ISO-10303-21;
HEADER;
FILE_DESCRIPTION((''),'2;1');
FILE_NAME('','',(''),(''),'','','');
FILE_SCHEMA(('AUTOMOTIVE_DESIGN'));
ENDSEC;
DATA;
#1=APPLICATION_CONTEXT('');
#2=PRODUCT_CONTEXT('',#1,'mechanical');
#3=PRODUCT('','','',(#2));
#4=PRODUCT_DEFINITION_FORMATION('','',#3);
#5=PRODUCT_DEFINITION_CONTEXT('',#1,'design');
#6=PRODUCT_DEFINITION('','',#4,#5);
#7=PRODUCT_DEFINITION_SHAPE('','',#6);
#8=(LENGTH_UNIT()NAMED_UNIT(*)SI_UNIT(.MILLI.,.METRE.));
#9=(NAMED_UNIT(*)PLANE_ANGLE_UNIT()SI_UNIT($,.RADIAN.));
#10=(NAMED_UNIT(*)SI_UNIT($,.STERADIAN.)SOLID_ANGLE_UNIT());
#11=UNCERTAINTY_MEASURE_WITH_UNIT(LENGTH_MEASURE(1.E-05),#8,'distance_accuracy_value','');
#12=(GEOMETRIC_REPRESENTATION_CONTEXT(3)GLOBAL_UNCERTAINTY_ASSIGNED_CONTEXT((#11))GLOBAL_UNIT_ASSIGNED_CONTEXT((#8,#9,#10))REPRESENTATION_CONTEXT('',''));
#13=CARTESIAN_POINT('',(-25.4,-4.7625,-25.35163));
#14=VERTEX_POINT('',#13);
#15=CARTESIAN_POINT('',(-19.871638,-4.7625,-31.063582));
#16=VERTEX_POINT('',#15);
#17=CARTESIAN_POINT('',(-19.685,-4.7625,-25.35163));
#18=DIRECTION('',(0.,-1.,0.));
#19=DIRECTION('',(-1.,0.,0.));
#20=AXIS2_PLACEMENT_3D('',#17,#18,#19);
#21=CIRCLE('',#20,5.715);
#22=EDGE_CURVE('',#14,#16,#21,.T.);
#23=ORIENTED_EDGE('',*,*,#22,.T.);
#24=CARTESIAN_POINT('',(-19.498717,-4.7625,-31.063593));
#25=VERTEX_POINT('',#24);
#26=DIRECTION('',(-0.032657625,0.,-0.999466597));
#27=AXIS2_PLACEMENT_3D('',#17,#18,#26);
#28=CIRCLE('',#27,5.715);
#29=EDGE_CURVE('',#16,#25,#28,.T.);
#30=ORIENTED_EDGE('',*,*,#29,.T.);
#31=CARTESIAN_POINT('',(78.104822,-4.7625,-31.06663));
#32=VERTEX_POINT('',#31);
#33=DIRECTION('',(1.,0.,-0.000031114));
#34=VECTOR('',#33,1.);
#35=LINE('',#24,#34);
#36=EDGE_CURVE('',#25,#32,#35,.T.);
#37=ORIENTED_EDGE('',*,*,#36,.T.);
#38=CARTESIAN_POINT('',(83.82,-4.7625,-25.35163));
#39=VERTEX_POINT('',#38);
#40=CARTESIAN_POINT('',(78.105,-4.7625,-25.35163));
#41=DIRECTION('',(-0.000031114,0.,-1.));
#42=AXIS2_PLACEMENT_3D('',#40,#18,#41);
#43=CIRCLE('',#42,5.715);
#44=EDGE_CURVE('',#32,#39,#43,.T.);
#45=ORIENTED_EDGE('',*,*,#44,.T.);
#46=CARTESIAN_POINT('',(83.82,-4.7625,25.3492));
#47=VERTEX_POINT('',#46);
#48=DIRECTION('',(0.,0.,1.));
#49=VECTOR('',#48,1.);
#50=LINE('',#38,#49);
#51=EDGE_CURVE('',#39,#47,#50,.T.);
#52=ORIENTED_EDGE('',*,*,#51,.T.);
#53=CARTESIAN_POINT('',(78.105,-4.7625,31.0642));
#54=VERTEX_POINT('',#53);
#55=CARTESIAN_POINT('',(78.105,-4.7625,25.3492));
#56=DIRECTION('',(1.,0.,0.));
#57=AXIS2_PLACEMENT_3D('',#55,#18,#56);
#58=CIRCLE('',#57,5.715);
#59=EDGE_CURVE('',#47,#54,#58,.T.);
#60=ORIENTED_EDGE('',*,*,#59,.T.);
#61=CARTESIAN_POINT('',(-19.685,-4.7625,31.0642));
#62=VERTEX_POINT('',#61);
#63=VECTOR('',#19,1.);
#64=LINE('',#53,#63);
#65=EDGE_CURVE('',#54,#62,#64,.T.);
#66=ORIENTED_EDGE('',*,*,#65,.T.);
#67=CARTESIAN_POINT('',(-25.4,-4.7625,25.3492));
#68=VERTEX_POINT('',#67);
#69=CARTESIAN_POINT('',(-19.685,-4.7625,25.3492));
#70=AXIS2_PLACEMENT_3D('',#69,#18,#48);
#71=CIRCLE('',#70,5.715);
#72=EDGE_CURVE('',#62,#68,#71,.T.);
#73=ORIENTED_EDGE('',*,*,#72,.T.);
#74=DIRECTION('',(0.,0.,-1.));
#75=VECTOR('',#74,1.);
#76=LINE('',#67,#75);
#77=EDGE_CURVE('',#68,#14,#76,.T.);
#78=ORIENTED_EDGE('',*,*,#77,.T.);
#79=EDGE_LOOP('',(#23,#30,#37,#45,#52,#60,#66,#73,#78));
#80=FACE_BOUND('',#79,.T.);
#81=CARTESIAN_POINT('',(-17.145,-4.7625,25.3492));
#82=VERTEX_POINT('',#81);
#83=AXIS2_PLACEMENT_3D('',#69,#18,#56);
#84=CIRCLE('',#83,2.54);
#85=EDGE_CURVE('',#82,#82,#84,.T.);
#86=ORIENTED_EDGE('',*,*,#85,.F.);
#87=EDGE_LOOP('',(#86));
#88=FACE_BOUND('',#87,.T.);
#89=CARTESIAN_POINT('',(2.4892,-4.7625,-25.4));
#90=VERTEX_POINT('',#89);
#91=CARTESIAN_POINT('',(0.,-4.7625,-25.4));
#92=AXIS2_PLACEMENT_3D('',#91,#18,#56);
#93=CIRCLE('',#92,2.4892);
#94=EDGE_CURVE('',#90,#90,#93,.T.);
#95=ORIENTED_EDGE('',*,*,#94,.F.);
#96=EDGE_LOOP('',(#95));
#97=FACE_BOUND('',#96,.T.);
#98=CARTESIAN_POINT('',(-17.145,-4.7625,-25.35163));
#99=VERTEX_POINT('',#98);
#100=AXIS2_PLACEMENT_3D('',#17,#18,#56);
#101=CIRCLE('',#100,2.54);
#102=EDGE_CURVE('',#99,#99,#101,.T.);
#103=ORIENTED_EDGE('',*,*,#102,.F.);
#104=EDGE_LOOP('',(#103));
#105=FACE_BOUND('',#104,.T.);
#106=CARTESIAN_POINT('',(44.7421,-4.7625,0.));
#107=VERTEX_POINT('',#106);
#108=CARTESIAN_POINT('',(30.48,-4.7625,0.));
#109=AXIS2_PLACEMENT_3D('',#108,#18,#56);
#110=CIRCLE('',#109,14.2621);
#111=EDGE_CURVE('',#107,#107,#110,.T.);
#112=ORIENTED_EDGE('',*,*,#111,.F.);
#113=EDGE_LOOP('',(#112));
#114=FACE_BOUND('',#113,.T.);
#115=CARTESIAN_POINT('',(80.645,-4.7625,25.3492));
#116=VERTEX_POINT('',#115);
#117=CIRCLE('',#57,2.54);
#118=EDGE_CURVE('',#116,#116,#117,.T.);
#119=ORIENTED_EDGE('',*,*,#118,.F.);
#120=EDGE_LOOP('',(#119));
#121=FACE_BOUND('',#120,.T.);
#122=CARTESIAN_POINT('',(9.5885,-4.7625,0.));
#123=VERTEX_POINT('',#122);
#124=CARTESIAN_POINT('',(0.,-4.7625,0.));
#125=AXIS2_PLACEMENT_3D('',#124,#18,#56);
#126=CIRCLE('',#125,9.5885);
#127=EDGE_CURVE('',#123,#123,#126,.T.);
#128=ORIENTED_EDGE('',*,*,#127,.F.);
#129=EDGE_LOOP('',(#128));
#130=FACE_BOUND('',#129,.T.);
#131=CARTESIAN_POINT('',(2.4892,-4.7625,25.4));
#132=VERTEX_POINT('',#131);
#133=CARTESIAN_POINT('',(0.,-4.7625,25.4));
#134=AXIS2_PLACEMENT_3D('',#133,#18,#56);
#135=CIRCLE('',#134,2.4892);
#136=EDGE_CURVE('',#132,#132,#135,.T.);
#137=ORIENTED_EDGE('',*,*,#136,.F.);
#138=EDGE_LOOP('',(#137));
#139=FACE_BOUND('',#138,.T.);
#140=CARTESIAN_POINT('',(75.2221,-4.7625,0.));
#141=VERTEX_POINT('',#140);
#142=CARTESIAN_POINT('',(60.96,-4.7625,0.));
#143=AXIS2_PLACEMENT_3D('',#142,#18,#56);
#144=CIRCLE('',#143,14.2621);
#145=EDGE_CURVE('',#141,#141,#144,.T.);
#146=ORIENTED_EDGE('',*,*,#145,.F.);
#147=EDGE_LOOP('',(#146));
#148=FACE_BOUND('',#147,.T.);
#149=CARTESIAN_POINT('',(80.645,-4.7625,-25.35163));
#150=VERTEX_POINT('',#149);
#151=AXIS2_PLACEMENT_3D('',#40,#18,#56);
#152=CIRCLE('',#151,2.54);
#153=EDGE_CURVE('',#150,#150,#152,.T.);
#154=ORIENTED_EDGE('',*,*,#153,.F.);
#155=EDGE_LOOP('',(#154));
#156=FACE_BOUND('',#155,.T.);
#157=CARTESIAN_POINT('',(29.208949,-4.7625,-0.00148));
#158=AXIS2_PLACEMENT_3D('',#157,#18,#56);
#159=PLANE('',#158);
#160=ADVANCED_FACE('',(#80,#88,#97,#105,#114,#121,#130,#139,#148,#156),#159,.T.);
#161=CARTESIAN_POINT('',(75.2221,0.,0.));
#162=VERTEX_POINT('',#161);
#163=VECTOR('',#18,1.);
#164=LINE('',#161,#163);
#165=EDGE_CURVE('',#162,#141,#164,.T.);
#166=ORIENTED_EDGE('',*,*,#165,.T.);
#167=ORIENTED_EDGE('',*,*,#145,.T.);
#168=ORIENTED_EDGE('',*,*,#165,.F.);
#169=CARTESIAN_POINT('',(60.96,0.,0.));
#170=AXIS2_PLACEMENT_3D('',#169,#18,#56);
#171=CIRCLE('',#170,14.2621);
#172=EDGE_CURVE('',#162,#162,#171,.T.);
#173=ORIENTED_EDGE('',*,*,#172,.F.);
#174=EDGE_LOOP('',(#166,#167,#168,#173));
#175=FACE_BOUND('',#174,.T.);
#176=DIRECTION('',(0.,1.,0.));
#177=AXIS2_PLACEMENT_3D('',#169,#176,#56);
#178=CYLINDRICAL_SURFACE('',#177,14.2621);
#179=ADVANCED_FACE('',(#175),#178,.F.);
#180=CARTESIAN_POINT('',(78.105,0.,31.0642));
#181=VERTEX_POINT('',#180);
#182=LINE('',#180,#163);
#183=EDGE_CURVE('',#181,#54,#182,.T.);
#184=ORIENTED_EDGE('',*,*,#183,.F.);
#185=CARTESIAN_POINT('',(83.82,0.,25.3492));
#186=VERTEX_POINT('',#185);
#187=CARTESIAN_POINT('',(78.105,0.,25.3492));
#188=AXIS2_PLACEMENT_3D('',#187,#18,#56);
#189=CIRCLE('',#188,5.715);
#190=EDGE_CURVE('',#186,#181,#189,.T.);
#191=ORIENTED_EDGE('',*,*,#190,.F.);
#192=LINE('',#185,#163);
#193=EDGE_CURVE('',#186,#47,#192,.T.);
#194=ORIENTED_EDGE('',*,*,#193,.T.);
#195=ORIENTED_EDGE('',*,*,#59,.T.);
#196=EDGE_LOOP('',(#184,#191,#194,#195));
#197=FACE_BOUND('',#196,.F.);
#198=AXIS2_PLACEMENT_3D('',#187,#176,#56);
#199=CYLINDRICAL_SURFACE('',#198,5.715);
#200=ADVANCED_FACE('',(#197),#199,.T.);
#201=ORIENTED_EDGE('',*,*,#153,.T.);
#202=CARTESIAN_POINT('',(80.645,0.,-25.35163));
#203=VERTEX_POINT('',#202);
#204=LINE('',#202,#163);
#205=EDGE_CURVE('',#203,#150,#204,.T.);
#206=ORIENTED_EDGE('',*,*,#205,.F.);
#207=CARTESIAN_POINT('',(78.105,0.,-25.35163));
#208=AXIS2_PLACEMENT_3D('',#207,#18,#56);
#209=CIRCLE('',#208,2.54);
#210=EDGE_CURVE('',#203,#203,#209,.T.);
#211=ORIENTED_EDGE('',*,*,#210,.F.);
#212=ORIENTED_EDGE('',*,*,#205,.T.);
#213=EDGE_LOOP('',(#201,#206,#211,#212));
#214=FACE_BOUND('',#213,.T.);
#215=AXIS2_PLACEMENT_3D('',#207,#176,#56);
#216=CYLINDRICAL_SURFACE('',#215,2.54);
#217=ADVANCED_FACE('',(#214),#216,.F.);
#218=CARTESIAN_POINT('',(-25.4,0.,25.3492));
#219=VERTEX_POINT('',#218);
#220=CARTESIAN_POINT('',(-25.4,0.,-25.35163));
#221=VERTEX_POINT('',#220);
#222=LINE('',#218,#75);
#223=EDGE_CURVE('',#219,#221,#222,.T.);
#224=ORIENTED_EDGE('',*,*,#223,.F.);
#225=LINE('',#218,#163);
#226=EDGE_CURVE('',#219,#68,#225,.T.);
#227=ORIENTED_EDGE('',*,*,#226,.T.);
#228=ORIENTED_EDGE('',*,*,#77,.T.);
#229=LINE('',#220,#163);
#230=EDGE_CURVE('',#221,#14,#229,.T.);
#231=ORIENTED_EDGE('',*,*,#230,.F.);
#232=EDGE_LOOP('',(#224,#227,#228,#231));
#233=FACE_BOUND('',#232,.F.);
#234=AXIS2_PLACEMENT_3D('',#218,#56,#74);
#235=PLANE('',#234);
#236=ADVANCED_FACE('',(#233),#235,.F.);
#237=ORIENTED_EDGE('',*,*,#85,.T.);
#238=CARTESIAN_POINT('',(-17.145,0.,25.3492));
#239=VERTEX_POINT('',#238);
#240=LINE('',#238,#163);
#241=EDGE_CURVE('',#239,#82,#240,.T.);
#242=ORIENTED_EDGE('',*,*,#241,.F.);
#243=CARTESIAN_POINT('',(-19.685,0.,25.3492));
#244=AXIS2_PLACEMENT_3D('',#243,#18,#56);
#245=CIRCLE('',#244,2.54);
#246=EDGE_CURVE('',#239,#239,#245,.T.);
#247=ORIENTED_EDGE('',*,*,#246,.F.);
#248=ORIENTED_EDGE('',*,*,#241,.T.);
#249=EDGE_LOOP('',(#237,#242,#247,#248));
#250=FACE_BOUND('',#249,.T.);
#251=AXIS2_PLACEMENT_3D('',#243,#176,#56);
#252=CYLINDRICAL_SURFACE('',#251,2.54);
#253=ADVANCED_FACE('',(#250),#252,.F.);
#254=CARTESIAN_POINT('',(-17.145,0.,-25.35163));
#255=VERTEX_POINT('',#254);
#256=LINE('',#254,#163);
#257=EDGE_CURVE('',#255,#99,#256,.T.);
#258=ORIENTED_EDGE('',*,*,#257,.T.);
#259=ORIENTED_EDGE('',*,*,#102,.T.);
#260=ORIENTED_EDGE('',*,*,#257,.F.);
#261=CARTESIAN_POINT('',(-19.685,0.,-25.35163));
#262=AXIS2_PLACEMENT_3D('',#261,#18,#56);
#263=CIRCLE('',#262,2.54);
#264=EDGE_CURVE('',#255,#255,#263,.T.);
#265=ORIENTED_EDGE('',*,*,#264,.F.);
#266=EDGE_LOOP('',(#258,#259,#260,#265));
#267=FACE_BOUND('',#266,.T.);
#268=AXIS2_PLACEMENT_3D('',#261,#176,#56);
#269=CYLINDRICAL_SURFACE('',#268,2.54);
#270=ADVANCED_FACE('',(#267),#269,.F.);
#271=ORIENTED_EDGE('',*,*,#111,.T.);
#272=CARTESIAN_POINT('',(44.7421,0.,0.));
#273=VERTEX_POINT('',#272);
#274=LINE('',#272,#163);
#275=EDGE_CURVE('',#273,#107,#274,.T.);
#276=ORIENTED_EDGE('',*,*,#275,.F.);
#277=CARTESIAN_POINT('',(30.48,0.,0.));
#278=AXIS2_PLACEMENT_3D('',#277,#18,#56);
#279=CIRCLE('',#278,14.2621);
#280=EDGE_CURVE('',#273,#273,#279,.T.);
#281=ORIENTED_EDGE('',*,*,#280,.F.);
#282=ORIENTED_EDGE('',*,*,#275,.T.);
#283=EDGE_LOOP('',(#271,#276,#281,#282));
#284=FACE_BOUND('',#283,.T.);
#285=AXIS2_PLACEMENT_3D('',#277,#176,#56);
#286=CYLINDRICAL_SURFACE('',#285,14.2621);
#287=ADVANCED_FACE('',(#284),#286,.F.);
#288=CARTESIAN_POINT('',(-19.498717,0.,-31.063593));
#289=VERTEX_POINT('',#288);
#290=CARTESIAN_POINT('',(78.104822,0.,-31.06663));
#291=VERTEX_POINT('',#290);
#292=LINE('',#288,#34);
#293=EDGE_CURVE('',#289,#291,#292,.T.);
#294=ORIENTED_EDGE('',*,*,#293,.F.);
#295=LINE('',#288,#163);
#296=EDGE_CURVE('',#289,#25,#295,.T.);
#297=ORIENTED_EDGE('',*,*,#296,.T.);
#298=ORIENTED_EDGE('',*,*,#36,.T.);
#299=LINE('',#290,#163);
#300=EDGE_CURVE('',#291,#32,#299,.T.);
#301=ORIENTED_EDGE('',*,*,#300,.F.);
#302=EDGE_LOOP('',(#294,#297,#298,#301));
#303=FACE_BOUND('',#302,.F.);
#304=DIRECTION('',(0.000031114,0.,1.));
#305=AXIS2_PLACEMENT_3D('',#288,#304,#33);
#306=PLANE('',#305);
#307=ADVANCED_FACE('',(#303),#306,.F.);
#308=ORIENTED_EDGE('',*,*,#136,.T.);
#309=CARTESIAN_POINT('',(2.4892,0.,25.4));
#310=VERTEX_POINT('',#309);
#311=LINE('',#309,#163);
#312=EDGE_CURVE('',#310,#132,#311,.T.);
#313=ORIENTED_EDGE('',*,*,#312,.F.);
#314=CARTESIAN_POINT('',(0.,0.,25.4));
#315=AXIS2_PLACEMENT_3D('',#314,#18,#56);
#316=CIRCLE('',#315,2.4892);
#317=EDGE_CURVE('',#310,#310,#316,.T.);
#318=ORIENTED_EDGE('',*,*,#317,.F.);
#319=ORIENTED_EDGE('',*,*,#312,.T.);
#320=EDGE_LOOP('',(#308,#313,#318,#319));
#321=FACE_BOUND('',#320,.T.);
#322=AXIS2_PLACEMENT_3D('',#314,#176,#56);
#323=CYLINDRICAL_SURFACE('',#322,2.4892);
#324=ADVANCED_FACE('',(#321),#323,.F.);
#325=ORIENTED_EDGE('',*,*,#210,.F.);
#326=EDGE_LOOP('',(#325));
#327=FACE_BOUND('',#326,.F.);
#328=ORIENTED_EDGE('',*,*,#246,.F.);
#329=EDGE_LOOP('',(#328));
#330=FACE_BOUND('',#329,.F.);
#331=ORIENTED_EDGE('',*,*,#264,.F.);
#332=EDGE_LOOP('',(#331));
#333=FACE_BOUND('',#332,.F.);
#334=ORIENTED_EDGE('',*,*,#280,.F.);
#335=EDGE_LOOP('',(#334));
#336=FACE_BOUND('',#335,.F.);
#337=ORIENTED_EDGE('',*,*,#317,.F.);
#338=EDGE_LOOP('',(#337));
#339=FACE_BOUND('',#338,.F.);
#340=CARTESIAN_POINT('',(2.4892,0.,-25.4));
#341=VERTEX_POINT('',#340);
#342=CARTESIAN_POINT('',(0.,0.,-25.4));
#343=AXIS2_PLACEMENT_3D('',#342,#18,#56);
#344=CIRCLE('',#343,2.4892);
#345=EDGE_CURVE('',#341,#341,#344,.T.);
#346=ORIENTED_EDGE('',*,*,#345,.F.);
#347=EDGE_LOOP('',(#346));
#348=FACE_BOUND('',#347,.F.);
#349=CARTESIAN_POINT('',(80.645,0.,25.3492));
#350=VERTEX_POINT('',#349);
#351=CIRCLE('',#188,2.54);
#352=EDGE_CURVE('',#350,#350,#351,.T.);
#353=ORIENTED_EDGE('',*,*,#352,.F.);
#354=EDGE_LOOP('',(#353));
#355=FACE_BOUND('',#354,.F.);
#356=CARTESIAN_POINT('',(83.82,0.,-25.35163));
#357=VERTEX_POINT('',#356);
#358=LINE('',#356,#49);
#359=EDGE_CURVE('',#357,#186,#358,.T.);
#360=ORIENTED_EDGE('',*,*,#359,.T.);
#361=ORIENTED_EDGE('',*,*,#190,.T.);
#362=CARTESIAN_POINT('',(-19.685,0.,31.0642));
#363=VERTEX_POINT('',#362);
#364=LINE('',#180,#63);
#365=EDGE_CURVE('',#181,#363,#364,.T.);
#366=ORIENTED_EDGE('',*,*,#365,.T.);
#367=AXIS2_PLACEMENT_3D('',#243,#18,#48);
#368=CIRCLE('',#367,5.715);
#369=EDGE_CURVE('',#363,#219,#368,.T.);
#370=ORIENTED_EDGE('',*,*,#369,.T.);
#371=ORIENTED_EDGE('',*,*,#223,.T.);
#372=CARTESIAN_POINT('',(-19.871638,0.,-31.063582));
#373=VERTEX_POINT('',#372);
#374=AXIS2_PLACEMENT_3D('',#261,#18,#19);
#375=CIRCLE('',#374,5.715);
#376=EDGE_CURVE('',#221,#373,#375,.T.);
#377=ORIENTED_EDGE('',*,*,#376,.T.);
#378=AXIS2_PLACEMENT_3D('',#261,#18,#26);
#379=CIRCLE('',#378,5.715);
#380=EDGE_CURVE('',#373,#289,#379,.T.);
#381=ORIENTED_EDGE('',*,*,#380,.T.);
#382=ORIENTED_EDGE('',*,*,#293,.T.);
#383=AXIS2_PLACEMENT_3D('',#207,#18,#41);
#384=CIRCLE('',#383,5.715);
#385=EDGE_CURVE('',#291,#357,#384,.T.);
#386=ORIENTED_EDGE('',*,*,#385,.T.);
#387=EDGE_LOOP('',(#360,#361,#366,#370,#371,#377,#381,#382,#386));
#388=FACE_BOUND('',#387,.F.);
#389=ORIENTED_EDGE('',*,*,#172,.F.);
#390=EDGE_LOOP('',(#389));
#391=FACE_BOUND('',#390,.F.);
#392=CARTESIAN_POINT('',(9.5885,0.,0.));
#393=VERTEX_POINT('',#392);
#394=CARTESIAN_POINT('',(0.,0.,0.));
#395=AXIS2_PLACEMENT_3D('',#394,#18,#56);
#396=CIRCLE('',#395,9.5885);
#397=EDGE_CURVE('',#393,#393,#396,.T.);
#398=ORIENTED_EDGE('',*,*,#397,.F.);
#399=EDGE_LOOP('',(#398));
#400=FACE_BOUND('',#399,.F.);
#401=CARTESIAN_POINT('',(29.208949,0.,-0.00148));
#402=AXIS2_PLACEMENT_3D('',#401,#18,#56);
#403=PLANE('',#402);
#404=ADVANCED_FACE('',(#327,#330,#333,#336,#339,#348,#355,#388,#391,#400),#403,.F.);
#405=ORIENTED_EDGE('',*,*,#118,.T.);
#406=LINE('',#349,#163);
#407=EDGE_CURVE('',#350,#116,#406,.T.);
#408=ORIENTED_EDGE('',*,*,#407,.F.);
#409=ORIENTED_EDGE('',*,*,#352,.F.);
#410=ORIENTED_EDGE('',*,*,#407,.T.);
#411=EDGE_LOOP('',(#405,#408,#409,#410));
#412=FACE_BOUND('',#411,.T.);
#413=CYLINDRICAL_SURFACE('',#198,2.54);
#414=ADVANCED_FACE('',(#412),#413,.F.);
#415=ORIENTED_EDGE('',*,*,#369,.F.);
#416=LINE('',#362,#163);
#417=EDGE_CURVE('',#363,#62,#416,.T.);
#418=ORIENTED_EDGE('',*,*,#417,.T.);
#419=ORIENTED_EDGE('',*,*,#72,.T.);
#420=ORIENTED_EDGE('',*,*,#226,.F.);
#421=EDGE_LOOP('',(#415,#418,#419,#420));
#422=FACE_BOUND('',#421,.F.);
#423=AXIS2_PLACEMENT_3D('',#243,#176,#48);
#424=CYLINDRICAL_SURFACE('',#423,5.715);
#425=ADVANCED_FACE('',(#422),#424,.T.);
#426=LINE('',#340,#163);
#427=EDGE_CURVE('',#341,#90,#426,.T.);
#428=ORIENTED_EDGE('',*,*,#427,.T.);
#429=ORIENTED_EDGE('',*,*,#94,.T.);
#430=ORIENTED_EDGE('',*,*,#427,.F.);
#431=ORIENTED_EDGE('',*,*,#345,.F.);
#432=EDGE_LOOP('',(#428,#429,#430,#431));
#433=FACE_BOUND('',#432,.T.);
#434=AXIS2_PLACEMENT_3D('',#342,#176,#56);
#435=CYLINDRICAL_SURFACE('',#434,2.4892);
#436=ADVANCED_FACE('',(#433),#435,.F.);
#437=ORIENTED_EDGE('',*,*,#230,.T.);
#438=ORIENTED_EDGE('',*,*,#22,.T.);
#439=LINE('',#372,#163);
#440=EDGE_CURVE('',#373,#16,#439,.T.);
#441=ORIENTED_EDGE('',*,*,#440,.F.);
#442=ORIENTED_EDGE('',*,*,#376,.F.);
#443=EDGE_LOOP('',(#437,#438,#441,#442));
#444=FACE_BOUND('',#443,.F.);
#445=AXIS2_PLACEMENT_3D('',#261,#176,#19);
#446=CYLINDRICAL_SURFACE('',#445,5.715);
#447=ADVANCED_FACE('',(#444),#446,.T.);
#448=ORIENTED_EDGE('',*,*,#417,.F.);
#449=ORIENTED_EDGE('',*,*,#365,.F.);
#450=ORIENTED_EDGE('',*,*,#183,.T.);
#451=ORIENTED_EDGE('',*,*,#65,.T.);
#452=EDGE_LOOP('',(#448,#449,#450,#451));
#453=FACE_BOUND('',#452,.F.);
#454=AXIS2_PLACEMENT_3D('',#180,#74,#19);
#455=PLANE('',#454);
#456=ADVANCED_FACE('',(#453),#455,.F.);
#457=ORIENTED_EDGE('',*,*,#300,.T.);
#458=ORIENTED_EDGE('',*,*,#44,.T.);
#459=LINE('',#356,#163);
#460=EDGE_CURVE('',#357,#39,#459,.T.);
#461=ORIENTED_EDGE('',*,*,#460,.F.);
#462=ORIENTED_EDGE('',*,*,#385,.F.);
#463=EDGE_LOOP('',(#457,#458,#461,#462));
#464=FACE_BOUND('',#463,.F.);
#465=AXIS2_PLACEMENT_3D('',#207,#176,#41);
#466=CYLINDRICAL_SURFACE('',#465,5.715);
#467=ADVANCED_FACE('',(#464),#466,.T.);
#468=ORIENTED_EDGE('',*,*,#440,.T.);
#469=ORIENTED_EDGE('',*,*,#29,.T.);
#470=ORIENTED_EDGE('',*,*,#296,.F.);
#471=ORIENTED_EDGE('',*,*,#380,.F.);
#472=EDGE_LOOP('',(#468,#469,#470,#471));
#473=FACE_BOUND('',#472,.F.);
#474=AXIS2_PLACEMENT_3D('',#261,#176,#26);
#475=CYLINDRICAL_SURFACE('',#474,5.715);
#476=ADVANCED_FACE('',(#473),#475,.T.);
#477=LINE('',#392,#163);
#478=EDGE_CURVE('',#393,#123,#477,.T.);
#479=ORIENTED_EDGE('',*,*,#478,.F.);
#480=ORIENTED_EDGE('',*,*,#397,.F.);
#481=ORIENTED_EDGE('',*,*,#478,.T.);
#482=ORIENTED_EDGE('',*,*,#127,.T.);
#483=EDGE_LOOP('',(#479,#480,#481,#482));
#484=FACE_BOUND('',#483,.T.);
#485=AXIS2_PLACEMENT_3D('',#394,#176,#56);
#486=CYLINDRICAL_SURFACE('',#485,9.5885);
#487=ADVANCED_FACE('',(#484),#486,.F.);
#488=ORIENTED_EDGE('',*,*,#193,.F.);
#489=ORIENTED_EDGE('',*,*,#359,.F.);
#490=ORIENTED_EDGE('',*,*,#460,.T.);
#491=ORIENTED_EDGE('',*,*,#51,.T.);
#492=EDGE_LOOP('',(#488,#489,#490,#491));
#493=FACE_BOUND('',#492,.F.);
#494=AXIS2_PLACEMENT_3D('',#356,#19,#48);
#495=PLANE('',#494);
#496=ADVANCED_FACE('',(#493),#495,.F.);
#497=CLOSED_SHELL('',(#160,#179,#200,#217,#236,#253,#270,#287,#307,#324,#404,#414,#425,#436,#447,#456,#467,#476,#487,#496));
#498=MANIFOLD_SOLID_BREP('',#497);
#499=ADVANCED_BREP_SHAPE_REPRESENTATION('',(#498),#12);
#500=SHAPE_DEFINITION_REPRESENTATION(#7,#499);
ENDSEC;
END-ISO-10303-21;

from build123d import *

# Parameters (mm, degrees)
F0_R     = 2.54
F0_R_2   = 2.4892
F0_R_3   = 9.5885
F0_R_4   = 14.2621
F1_DEPTH = 4.7625


# Not quite as in the source:
# - a length typed as a fraction of an inch, garbled in the dataset ("3 / 203.2 mm" for 3/8 in), is restored


with BuildPart() as f1:
    # F0 (on Front) → F1 (new body)
    with BuildSketch(Plane.XZ):
        with BuildLine():
            Line((83.82, -25.3516301214), (83.82, 25.3492))
            ThreePointArc((83.82, 25.3492), (82.1461152545, 29.3903152545), (78.105, 31.0642))
            Line((78.105, 31.0642), (-19.685, 31.0642))
            ThreePointArc((-19.685, 31.0642), (-23.7261152545, 29.3903152545), (-25.4, 25.3492))
            Line((-25.4, 25.3492), (-25.4, -25.3516301214))
            ThreePointArc((-25.4, -25.3516301214), (-23.7915717475, -29.3262110405), (-19.8716383264, -31.0635817261))
            Line((-19.8716383264, -31.0635817261), (-19.4987171118, -31.063593329))
            Line((-19.4987171118, -31.063593329), (78.1048221862, -31.0666301186))
            ThreePointArc((78.1048221862, -31.0666301186), (82.1460523873, -29.392808242), (83.82, -25.3516301214))
        make_face()
        with Locations((-19.685, -25.3516301214)):
            Circle(F0_R, mode=Mode.SUBTRACT)
        with Locations((0, -25.4)):
            Circle(F0_R_2, mode=Mode.SUBTRACT)
        with Locations((78.105, -25.3516301214)):
            Circle(F0_R, mode=Mode.SUBTRACT)
        Circle(F0_R_3, mode=Mode.SUBTRACT)
        with Locations((-19.685, 25.3492)):
            Circle(F0_R, mode=Mode.SUBTRACT)
        with Locations((0, 25.4)):
            Circle(F0_R_2, mode=Mode.SUBTRACT)
        with Locations((30.48, 0)):
            Circle(F0_R_4, mode=Mode.SUBTRACT)
        with Locations((60.96, 0)):
            Circle(F0_R_4, mode=Mode.SUBTRACT)
        with Locations((78.105, 25.3492)):
            Circle(F0_R, mode=Mode.SUBTRACT)
        with BuildLine():
            ThreePointArc((-19.8716383264, -31.0635817261), (-19.6851778138, -31.0666301186), (-19.4987171118, -31.063593329))
            Line((-19.4987171118, -31.063593329), (-19.8716383264, -31.0635817261))
        make_face()
    extrude(amount=F1_DEPTH)


solid = f1.part
